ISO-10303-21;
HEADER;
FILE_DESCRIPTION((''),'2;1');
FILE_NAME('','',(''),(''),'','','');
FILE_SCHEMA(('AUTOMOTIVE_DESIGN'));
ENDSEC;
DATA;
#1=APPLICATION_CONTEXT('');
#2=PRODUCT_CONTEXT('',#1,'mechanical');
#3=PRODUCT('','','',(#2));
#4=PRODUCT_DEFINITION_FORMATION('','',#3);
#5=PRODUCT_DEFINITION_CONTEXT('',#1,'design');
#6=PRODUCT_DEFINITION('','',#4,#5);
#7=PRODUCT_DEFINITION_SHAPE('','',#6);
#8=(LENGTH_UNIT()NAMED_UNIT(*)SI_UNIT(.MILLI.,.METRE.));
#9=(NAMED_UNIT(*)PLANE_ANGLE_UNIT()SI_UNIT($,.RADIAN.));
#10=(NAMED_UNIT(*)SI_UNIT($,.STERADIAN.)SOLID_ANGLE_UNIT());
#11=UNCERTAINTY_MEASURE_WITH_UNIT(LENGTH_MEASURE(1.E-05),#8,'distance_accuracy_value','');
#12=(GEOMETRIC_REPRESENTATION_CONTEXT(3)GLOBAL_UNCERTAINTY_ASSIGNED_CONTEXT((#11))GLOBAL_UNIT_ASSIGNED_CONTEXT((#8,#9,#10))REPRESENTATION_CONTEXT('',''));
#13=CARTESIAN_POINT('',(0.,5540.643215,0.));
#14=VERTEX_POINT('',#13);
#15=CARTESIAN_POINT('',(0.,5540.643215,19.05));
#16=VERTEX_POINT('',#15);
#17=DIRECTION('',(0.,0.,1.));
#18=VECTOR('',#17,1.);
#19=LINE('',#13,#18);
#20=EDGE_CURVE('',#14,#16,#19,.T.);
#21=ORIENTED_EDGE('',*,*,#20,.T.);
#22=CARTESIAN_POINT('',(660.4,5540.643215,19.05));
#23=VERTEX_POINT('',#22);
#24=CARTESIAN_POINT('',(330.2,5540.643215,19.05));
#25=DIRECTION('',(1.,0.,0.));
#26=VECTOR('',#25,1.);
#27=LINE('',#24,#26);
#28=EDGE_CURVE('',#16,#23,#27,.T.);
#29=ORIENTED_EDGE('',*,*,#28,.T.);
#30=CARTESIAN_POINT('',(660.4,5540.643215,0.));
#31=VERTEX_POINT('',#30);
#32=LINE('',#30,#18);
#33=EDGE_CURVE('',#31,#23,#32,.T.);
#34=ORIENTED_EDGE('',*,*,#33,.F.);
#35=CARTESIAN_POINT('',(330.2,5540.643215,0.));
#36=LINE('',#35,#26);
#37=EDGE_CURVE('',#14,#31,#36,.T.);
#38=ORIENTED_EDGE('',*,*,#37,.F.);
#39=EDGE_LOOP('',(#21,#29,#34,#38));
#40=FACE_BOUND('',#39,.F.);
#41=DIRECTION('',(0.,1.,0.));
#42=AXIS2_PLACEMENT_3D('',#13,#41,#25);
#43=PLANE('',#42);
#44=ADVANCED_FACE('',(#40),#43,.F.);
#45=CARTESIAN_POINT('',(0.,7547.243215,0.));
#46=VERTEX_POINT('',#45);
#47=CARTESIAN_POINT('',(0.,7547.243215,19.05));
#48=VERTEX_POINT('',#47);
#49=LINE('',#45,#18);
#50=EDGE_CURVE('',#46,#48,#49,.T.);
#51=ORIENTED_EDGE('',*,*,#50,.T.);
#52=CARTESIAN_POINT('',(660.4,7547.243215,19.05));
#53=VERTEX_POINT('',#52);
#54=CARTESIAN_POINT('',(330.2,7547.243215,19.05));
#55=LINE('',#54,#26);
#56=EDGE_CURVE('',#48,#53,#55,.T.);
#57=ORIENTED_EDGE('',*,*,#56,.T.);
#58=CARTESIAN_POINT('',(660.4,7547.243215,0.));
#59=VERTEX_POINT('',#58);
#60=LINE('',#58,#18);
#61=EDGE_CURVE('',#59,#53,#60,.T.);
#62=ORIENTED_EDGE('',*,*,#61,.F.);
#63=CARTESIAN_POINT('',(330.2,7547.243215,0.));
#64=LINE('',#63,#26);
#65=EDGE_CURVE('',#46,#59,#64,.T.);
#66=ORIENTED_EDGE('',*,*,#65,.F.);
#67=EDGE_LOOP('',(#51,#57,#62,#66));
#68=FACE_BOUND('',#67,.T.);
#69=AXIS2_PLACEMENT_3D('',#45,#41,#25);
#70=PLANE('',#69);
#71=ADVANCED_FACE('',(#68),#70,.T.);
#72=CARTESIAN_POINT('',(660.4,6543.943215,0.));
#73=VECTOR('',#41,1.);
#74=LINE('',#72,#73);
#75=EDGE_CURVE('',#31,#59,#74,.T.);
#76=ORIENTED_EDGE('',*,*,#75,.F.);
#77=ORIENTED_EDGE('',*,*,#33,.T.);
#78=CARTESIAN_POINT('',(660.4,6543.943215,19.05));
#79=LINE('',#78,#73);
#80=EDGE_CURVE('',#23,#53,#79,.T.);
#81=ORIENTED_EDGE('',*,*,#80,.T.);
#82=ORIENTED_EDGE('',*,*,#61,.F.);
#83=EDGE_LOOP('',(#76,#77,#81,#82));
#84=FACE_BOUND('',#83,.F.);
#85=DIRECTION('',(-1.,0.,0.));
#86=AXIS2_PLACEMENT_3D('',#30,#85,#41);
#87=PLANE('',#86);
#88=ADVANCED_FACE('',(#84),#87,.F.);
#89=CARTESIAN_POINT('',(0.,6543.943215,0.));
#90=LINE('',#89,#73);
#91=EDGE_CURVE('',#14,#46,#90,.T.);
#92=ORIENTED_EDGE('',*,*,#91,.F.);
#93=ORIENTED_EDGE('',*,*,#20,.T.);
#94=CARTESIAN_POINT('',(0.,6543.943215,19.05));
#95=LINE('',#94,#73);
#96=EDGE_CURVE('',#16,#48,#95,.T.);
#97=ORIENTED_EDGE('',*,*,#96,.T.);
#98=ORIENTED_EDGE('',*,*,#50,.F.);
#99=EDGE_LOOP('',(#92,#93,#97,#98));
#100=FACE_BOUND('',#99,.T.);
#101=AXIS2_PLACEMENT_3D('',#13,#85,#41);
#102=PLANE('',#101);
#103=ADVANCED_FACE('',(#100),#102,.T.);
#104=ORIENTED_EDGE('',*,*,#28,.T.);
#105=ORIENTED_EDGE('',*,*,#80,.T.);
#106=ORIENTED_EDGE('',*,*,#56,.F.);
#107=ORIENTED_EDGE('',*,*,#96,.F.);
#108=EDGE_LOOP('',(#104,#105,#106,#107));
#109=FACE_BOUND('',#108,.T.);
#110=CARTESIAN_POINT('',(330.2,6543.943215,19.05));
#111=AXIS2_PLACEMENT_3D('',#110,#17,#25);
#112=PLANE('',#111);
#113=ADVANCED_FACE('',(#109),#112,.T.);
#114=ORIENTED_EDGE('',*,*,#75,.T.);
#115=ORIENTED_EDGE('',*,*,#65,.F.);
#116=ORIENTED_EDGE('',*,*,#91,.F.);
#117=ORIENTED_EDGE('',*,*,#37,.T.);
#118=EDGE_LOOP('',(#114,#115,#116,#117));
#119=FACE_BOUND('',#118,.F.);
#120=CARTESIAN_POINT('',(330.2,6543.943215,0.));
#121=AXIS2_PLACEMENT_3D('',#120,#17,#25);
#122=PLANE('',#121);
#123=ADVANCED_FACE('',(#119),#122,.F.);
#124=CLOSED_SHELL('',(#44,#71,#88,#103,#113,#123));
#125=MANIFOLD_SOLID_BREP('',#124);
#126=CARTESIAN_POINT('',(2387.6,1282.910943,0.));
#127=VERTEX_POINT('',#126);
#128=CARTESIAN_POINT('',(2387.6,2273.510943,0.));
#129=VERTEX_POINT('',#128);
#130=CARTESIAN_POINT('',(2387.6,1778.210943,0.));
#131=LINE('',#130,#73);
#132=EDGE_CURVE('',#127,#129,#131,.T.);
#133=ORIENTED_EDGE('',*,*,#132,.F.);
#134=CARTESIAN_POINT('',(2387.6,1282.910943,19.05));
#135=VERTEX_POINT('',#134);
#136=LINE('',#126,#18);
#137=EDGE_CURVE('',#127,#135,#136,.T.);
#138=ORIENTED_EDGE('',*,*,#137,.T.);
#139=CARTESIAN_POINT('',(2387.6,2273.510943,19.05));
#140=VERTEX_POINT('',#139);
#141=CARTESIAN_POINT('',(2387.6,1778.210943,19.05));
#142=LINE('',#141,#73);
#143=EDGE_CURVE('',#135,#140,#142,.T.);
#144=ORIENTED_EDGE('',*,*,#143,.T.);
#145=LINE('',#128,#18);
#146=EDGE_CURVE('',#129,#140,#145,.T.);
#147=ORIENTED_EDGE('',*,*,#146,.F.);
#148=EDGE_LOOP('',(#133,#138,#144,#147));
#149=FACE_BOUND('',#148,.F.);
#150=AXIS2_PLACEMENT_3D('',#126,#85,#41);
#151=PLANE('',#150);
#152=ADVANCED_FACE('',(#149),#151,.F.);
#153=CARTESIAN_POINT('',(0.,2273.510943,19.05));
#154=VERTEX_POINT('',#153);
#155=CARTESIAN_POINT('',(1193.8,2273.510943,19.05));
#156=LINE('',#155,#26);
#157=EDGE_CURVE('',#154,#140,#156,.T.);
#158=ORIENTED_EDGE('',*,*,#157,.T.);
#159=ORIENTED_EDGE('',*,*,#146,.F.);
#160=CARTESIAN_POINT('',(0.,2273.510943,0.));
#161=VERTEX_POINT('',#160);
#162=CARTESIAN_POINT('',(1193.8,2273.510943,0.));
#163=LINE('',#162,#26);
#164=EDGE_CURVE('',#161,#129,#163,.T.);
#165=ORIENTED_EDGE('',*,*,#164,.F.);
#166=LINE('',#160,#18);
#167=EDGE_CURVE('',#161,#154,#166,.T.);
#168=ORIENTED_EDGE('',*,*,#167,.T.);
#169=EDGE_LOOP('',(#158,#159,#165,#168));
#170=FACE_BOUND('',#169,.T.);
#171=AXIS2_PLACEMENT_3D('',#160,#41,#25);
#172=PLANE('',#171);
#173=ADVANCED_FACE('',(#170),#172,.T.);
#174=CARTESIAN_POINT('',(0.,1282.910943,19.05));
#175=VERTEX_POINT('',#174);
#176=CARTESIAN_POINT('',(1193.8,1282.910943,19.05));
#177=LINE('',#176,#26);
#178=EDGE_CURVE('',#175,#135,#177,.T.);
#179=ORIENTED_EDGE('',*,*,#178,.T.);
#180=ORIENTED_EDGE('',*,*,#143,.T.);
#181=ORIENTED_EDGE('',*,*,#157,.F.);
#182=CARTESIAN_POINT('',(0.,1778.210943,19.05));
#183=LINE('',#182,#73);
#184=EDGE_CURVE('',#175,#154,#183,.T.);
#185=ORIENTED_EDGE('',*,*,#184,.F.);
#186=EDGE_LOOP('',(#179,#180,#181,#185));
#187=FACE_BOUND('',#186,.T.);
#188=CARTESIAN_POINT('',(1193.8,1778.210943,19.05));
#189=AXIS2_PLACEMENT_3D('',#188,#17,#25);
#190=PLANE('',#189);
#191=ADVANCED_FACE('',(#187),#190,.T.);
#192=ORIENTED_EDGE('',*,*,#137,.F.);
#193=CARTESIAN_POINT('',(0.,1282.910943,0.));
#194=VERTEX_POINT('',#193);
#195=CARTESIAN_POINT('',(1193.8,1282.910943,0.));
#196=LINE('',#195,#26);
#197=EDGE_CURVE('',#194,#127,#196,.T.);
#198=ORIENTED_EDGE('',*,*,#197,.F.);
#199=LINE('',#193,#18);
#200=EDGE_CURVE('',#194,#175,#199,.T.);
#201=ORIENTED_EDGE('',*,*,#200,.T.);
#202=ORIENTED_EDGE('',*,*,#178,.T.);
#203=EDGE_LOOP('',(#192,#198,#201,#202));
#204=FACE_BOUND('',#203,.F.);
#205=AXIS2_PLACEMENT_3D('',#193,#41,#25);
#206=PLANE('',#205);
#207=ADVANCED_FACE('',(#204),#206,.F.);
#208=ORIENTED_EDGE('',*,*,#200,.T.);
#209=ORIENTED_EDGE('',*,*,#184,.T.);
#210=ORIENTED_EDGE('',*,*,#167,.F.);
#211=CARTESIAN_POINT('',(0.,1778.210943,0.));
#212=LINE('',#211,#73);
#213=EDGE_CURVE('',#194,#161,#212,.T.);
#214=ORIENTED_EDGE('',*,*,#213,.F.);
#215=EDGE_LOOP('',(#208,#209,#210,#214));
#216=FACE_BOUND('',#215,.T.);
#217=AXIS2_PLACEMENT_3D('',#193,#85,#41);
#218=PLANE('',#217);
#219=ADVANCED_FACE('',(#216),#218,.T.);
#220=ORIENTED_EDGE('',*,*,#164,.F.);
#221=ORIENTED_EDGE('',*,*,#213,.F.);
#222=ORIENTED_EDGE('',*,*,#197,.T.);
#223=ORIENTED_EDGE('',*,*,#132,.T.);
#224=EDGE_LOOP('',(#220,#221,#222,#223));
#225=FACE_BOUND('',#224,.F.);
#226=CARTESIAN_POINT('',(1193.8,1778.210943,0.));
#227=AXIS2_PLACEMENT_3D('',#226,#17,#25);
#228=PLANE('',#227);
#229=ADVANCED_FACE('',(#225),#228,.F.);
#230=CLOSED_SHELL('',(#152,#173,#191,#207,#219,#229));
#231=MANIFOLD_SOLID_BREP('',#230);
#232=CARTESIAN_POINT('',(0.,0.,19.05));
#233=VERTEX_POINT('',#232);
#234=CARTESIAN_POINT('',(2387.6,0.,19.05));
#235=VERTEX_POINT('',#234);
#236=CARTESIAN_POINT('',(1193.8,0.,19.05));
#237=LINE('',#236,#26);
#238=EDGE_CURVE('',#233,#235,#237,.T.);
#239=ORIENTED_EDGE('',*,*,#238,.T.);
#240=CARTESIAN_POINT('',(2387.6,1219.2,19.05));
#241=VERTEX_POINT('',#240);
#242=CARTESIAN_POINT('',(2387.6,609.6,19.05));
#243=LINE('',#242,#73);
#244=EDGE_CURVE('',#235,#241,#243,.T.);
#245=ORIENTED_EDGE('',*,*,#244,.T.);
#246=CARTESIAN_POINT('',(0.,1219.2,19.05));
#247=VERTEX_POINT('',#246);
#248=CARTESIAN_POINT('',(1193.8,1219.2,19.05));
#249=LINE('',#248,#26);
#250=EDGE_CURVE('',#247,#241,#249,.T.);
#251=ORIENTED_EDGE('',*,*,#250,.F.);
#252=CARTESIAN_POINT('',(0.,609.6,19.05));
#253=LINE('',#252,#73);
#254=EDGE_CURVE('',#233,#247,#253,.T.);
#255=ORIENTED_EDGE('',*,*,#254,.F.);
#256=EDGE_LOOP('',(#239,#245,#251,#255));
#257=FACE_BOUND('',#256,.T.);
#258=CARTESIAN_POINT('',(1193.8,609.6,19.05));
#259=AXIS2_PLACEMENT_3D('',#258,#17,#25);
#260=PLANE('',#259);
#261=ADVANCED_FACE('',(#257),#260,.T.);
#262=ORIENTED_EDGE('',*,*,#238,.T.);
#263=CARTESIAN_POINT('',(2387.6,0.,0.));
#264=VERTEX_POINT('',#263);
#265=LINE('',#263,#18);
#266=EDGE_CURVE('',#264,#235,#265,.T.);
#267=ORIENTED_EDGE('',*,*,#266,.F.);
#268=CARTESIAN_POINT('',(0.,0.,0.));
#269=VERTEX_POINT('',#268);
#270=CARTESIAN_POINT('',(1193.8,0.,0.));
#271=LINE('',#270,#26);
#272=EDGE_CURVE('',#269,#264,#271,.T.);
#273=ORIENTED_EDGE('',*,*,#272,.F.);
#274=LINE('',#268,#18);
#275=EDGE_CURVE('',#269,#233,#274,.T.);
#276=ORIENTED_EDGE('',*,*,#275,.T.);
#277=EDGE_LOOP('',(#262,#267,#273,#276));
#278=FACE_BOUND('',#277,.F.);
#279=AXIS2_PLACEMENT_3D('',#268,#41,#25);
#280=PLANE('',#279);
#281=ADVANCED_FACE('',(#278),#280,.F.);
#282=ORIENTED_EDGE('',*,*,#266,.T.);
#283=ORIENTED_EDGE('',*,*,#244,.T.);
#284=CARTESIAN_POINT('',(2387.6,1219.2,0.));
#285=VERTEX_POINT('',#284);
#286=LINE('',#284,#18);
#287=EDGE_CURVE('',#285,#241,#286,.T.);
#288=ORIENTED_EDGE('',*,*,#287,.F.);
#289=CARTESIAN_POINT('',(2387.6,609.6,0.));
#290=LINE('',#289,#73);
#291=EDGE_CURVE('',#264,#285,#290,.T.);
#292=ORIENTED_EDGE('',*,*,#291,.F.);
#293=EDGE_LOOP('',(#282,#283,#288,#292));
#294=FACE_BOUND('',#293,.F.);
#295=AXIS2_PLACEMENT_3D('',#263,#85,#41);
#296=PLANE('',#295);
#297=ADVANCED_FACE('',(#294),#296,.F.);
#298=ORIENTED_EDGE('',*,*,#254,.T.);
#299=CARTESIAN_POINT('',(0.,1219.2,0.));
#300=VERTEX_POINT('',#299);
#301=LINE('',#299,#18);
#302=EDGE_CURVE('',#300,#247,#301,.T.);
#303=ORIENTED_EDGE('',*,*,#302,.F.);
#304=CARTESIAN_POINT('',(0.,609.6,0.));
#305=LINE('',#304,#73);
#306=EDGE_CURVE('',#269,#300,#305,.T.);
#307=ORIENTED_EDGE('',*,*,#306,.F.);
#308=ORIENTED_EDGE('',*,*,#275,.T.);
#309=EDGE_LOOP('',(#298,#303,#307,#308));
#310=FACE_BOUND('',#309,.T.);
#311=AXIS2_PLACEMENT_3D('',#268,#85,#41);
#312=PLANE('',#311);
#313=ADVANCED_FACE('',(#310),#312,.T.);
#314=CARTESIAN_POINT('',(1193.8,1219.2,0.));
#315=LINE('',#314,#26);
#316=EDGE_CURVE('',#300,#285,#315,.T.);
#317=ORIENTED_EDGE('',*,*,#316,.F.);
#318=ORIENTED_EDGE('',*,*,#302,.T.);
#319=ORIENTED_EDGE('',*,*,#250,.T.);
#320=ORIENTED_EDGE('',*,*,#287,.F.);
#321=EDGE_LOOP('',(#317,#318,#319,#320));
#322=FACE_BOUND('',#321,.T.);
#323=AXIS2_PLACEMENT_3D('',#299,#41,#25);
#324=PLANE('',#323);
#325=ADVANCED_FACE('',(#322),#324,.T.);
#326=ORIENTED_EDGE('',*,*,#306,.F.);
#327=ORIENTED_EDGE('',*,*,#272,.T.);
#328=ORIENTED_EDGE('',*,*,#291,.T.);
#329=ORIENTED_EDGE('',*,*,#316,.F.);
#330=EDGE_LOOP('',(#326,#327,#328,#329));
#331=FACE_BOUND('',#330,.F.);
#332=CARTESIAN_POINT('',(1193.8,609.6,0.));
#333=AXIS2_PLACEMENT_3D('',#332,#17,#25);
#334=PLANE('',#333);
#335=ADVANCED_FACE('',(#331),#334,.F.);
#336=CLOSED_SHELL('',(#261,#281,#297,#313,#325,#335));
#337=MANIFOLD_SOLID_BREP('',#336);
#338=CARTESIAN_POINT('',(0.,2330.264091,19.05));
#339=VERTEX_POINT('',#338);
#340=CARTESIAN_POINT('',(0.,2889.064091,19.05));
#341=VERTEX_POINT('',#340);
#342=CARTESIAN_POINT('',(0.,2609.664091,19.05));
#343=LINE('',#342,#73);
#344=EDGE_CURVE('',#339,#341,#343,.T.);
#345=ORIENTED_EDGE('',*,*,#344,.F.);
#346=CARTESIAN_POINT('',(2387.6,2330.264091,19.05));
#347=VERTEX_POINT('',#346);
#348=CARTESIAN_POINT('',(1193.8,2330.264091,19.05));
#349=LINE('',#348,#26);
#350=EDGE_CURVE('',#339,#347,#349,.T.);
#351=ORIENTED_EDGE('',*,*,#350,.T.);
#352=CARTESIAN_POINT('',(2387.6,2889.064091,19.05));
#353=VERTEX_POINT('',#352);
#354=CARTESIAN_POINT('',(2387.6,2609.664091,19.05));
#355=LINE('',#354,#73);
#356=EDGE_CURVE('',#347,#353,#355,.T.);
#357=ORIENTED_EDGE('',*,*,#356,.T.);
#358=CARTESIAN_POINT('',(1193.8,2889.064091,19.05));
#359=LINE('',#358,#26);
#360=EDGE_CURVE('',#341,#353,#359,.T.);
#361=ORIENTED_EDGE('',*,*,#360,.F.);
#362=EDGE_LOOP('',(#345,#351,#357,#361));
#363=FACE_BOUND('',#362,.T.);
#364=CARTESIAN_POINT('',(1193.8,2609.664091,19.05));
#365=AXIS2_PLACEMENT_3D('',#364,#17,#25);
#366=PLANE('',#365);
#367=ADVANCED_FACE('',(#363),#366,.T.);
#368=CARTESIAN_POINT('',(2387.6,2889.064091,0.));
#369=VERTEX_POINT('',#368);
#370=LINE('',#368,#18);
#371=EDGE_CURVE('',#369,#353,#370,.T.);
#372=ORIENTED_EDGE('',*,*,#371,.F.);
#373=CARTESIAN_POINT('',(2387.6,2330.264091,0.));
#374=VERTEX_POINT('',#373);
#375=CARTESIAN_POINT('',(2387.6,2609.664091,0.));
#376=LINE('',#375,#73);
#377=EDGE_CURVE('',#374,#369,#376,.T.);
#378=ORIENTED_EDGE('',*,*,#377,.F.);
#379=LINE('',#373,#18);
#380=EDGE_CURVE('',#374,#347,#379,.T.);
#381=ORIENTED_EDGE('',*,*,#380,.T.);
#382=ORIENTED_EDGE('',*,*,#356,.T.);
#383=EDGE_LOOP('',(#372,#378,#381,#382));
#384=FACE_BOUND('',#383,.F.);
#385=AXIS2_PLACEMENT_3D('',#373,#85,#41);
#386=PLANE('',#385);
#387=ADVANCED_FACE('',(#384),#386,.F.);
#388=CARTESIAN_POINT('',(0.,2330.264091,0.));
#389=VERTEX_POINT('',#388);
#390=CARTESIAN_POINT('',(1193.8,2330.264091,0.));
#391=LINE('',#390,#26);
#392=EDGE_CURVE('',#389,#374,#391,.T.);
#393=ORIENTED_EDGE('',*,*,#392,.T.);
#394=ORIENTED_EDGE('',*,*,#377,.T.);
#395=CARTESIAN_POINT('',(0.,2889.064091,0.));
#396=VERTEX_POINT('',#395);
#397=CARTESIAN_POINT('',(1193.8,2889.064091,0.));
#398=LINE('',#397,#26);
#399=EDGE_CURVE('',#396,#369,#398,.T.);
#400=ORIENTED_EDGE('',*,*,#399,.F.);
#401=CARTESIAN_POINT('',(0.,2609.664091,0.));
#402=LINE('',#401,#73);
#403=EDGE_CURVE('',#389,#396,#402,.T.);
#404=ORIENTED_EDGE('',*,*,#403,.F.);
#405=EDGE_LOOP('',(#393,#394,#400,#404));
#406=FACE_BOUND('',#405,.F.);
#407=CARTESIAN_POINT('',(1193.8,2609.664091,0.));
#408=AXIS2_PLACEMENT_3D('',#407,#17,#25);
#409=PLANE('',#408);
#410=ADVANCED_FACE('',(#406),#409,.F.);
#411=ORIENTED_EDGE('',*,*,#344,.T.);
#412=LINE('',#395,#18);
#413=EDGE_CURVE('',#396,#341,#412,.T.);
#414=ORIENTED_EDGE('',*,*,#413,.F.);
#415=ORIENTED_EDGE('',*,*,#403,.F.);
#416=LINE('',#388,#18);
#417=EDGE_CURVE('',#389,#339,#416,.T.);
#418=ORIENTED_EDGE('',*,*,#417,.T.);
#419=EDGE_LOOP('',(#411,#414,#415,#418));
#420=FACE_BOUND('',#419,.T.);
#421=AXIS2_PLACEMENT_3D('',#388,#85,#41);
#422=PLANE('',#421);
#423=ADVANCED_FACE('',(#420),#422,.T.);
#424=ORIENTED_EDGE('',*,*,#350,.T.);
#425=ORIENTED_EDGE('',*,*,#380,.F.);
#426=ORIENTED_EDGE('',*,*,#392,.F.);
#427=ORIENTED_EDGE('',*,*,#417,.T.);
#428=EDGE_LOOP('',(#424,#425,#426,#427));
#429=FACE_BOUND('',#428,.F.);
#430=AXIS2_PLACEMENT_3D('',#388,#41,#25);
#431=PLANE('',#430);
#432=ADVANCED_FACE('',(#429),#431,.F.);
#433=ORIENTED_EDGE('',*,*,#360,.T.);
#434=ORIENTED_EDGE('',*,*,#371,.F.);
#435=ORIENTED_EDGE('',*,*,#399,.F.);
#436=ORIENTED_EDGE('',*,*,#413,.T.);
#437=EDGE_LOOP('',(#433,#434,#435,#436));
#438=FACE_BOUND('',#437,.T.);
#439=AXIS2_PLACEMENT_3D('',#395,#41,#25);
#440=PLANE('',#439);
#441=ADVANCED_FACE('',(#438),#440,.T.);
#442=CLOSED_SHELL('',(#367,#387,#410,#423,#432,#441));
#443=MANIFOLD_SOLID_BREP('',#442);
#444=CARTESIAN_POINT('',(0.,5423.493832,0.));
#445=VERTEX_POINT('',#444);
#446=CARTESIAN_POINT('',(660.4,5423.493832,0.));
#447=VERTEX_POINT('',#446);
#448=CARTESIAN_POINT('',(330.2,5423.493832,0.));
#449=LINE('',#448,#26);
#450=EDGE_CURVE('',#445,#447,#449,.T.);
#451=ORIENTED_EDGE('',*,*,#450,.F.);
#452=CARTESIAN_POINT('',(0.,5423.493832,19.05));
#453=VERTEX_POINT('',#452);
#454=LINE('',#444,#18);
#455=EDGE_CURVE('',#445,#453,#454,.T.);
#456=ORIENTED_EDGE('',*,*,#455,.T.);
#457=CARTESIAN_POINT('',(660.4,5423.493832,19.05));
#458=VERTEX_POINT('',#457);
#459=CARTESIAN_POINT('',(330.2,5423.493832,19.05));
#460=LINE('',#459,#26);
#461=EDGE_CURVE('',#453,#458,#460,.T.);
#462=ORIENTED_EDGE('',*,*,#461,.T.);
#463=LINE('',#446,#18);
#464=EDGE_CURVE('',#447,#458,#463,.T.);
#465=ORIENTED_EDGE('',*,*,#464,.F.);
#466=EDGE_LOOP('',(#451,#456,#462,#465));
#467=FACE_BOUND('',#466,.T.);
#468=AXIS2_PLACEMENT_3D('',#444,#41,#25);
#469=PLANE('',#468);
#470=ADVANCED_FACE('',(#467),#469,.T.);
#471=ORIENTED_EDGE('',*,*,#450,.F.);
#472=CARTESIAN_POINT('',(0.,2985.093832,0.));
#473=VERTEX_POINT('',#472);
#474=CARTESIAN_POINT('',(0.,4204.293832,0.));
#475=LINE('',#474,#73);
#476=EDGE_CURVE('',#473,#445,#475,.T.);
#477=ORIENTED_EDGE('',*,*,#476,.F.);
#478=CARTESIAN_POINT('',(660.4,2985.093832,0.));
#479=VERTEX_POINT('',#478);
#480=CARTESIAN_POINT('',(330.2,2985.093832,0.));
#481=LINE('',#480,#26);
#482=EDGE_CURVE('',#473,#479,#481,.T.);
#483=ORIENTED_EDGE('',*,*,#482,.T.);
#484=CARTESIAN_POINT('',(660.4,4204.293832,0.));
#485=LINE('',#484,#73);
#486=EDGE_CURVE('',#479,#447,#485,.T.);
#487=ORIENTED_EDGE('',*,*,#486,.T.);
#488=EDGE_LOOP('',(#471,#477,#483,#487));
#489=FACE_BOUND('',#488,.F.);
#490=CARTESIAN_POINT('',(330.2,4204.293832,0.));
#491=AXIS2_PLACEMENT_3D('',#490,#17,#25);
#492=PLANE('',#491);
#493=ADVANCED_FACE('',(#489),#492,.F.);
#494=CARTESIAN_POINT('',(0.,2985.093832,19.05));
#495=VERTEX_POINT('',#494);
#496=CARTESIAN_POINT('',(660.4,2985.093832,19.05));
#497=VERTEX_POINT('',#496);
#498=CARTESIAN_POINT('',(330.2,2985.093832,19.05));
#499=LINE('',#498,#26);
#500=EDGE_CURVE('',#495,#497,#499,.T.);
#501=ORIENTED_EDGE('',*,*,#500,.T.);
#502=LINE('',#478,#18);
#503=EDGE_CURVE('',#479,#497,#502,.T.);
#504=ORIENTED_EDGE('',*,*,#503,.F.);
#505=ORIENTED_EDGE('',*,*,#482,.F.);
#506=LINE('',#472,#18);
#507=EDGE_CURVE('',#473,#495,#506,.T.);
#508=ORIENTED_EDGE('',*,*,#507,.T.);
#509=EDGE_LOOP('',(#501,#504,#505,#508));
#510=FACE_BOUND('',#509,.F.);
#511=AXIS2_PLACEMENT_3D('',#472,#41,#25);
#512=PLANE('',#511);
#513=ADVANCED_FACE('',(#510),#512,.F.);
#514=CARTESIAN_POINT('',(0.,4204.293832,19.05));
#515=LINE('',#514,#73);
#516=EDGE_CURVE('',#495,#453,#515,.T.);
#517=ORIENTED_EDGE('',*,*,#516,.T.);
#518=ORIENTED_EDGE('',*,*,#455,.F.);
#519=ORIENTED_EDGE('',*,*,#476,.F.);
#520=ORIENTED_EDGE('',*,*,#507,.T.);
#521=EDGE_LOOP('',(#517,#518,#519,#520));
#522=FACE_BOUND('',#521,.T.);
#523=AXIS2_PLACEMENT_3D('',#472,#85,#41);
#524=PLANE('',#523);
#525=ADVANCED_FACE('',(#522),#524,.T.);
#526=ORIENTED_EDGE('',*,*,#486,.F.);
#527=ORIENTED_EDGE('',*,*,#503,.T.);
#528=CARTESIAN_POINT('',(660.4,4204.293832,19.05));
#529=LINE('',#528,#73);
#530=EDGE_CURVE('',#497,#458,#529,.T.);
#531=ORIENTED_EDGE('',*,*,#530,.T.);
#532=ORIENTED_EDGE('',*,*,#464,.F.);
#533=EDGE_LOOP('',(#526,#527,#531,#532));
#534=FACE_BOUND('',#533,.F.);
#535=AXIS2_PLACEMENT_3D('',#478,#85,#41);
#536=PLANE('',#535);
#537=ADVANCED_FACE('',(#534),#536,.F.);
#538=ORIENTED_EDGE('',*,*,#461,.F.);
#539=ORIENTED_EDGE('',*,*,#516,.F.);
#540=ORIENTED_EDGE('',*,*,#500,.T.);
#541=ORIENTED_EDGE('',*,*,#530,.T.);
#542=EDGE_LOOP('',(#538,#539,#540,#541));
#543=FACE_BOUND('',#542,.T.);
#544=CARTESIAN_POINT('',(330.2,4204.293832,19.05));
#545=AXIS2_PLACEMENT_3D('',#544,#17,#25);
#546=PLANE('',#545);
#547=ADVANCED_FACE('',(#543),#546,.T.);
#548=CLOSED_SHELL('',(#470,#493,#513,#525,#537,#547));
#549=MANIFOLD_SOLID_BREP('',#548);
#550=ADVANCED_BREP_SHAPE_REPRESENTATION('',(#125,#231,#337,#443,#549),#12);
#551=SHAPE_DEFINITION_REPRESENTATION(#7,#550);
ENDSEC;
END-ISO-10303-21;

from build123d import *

# Parameters (mm, degrees)
F0_W     = 2387.6
F0_H     = 1219.2
F1_DEPTH = 19.05
F0_H_2   = 558.8
F0_W_2   = 660.4
F0_H_3   = 2438.4
F0_H_4   = 2006.6
F0_H_5   = 990.6


# Not quite as in the source:
# - a length typed as a fraction of an inch, garbled in the dataset ("3 / 203.2 mm" for 3/8 in), is restored


with BuildPart() as f1:
    # F0 (on Top) → F1 (new body)
    with BuildSketch(Plane.XY):
        with Locations((1193.8, 609.6)):
            Rectangle(F0_W, F0_H)
    extrude(amount=F1_DEPTH)


with BuildPart() as f1b:
    # F0 (on Top) → F1, piece 2 (new body)
    with BuildSketch(Plane.XY):
        with Locations((1193.8, 2609.6640914917)):
            Rectangle(F0_W, F0_H_2)
    extrude(amount=F1_DEPTH)


with BuildPart() as f1c:
    # F0 (on Top) → F1, piece 3 (new body)
    with BuildSketch(Plane.XY):
        with Locations((330.2, 4204.293832016)):
            Rectangle(F0_W_2, F0_H_3)
    extrude(amount=F1_DEPTH)


with BuildPart() as f1d:
    # F0 (on Top) → F1, piece 4 (new body)
    with BuildSketch(Plane.XY):
        with Locations((330.2, 6543.9432151794)):
            Rectangle(F0_W_2, F0_H_4)
    extrude(amount=F1_DEPTH)


with BuildPart() as f1e:
    # F0 (on Top) → F1, piece 5 (new body)
    with BuildSketch(Plane.XY):
        with Locations((1193.8, 1778.2109430313)):
            Rectangle(F0_W, F0_H_5)
    extrude(amount=F1_DEPTH)


solid = Compound([f1.part, f1b.part, f1c.part, f1d.part, f1e.part])
